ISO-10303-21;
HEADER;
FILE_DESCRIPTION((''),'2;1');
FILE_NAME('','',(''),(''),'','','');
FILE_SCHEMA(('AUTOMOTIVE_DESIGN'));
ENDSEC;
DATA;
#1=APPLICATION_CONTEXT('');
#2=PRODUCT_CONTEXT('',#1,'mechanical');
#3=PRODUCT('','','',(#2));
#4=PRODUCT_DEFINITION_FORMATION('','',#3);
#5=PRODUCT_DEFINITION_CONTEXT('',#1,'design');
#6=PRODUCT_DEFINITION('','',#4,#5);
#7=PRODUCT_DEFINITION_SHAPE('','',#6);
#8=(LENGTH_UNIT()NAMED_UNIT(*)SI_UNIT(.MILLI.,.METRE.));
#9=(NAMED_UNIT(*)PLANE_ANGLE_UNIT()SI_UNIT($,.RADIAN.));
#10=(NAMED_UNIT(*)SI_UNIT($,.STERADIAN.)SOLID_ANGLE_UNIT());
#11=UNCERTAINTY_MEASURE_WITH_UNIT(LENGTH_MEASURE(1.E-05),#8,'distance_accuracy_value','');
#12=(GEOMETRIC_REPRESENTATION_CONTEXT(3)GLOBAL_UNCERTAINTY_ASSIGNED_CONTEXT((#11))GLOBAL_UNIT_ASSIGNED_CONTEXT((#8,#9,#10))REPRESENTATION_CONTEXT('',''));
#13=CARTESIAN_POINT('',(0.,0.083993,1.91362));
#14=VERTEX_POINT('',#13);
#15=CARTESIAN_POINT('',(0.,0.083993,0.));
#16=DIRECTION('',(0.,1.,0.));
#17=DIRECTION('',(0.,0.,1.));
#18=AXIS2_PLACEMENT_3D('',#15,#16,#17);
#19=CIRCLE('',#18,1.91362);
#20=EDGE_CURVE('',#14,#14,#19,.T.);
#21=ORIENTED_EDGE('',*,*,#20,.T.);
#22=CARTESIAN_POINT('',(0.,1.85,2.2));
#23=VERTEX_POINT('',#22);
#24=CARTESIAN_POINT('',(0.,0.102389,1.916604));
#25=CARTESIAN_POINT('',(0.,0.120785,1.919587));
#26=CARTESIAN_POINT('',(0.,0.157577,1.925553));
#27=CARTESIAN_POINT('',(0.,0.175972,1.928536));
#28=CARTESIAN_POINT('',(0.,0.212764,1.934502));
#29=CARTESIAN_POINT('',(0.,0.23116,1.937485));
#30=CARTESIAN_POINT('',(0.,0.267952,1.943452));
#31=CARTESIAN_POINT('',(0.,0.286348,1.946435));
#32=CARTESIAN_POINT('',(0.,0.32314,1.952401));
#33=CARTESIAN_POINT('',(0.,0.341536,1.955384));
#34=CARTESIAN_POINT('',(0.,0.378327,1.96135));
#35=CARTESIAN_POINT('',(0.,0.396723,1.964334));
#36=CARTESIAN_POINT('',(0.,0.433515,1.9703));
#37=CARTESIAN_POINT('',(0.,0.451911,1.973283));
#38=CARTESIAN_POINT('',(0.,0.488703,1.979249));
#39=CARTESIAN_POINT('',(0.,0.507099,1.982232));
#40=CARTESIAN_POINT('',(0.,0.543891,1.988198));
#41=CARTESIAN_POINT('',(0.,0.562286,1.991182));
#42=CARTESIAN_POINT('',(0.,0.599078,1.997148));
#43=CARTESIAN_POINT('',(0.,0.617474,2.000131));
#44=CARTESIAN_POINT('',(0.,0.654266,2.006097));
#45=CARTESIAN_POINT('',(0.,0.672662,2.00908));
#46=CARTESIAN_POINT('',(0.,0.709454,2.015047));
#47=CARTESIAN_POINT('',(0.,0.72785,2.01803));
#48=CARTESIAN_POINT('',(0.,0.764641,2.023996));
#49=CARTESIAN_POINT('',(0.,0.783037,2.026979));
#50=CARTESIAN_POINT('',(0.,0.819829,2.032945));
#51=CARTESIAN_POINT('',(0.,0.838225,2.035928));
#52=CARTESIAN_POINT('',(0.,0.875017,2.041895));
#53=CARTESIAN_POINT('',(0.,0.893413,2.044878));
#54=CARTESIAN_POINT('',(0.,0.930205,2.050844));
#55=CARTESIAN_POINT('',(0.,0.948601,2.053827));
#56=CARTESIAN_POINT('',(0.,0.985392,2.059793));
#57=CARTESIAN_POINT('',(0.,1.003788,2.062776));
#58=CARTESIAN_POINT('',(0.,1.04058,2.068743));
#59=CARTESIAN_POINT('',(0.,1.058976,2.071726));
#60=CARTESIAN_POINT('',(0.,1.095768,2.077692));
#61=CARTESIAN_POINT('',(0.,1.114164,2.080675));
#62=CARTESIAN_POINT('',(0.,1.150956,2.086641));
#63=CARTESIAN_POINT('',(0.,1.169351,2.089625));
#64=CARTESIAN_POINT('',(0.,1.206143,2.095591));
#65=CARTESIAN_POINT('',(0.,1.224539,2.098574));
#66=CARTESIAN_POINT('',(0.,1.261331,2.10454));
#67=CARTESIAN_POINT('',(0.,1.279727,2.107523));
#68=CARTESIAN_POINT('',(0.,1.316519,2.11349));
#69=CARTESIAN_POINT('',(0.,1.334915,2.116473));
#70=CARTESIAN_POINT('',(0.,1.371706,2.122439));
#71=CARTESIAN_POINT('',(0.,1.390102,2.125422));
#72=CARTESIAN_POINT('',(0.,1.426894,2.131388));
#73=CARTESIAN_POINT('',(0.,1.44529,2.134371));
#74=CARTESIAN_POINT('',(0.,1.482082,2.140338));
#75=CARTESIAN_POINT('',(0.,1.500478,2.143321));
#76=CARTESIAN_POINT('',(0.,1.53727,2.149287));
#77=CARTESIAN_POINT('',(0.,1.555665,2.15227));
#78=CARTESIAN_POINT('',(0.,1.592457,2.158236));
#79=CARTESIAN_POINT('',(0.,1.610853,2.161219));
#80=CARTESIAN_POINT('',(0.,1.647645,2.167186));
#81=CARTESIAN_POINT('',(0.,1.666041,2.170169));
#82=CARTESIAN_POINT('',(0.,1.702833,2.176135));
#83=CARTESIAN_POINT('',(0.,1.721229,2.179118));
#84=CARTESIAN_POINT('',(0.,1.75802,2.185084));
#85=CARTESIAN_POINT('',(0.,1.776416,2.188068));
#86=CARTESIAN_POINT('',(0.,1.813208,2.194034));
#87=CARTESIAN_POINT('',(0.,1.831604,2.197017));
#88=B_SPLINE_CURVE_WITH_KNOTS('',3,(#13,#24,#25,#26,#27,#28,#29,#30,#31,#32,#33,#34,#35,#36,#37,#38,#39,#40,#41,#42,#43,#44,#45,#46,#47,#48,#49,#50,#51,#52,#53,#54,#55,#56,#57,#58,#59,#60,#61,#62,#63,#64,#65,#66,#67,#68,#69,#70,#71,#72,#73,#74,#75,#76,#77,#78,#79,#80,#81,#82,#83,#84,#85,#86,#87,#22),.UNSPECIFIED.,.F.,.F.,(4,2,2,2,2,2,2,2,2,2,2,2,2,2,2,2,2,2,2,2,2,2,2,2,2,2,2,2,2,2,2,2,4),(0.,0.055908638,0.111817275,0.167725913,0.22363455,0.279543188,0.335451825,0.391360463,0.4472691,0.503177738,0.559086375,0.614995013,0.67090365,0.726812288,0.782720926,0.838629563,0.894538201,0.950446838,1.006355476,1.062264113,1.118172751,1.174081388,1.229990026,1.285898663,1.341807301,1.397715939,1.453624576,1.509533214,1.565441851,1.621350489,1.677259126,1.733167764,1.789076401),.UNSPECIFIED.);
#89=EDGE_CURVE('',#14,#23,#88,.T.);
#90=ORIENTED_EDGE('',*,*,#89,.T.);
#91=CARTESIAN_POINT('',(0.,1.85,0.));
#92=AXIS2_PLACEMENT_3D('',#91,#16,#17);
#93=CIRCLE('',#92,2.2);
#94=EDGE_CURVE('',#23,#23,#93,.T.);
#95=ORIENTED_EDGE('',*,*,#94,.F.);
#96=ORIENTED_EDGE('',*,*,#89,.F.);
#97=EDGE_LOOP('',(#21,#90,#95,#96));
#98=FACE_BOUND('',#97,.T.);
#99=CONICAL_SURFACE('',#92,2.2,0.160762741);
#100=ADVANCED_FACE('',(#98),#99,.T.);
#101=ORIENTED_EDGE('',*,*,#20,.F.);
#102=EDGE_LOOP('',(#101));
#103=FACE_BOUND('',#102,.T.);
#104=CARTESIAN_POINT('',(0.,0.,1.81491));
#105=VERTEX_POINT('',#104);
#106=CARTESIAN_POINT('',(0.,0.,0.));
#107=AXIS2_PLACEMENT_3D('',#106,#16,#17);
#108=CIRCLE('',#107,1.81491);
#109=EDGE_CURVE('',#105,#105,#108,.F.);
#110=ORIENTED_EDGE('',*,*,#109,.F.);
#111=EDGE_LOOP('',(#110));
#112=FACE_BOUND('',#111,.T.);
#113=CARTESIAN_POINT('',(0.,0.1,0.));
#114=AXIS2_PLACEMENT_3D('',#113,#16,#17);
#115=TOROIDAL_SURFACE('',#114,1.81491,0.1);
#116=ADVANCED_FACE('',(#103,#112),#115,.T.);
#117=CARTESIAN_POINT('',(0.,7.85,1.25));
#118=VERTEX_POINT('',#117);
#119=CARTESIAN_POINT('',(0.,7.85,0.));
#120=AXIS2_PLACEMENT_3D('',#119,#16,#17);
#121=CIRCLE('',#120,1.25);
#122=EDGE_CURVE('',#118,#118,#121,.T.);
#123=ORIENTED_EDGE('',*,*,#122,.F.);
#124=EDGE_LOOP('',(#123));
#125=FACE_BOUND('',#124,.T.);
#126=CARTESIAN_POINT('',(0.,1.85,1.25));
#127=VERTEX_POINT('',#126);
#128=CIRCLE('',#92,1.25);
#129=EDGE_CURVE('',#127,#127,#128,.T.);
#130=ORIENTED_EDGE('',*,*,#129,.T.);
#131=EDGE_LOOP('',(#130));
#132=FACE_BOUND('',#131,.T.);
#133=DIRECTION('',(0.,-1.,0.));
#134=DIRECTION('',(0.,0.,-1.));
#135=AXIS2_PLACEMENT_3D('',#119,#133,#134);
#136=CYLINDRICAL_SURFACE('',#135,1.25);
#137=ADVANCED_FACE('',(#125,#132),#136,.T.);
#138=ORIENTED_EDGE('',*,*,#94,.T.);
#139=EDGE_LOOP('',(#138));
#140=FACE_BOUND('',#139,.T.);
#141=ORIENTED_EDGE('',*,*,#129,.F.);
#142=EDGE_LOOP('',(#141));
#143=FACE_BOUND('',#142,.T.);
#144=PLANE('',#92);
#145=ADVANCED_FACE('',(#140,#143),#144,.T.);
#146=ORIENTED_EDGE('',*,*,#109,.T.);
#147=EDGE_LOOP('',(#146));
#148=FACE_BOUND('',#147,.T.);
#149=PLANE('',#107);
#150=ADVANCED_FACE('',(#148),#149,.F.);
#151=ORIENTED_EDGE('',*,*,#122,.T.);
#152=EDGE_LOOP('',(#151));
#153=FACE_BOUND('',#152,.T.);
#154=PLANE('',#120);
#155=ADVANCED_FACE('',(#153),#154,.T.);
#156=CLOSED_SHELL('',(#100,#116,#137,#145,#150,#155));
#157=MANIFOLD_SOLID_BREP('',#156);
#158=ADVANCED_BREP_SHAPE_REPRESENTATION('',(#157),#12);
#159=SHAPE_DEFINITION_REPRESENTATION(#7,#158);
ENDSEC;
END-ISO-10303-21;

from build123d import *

# Parameters (mm, degrees)
ESQUISSE1_R        = 2.2
BOSS_EXTRU_1_DEPTH = 1.85
ESQUISSE2_R        = 1.25
BOSS_EXTRU_2_DEPTH = 6
CHANFREIN1_SIZE    = 1.85
CHANFREIN1_SIZE_2  = 0.3
CONG_1_R           = 0.1


with BuildPart() as part:
    # Esquisse1 → Boss.-Extru.1 (new body)
    with BuildSketch(Plane(origin=(0, 0, 0), x_dir=(1, 0, 0), z_dir=(0, 1, 0))):
        with Locations(Location((0, 0, 0), (0, 0, 270))):
            Circle(ESQUISSE1_R)
    extrude(amount=BOSS_EXTRU_1_DEPTH)

    # Esquisse2 → Boss.-Extru.2 (add)
    with BuildSketch(Plane(origin=(0, 1.85, 0), x_dir=(1, 0, 0), z_dir=(0, 1, 0))):
        with Locations(Location((0, 0, 0), (0, 0, 270))):
            Circle(ESQUISSE2_R)
    extrude(amount=BOSS_EXTRU_2_DEPTH)

    # Chanfrein1
    # the kernel refuses this chamfer: 1.85, 0.3 mm, written as the material it takes off along each edge
    with BuildSketch(Plane(origin=(0, 0, 0), x_dir=(0, 0, 1), z_dir=(-1, 0, 0))) as chanfrein1_piece_1:
        Polygon((2.2, CHANFREIN1_SIZE), (2.2 - CHANFREIN1_SIZE_2, 0), (2.2, 0), align=None)
    revolve(axis=Axis((0, 0, 0), (0, 1, 0)), mode=Mode.SUBTRACT)

    # Congé1
    cong_1_edges = [part.edges().sort_by_distance(p)[0] for p in [
        (0, 0, -1.9),
    ]]
    fillet(cong_1_edges, radius=CONG_1_R)


solid = part.part
